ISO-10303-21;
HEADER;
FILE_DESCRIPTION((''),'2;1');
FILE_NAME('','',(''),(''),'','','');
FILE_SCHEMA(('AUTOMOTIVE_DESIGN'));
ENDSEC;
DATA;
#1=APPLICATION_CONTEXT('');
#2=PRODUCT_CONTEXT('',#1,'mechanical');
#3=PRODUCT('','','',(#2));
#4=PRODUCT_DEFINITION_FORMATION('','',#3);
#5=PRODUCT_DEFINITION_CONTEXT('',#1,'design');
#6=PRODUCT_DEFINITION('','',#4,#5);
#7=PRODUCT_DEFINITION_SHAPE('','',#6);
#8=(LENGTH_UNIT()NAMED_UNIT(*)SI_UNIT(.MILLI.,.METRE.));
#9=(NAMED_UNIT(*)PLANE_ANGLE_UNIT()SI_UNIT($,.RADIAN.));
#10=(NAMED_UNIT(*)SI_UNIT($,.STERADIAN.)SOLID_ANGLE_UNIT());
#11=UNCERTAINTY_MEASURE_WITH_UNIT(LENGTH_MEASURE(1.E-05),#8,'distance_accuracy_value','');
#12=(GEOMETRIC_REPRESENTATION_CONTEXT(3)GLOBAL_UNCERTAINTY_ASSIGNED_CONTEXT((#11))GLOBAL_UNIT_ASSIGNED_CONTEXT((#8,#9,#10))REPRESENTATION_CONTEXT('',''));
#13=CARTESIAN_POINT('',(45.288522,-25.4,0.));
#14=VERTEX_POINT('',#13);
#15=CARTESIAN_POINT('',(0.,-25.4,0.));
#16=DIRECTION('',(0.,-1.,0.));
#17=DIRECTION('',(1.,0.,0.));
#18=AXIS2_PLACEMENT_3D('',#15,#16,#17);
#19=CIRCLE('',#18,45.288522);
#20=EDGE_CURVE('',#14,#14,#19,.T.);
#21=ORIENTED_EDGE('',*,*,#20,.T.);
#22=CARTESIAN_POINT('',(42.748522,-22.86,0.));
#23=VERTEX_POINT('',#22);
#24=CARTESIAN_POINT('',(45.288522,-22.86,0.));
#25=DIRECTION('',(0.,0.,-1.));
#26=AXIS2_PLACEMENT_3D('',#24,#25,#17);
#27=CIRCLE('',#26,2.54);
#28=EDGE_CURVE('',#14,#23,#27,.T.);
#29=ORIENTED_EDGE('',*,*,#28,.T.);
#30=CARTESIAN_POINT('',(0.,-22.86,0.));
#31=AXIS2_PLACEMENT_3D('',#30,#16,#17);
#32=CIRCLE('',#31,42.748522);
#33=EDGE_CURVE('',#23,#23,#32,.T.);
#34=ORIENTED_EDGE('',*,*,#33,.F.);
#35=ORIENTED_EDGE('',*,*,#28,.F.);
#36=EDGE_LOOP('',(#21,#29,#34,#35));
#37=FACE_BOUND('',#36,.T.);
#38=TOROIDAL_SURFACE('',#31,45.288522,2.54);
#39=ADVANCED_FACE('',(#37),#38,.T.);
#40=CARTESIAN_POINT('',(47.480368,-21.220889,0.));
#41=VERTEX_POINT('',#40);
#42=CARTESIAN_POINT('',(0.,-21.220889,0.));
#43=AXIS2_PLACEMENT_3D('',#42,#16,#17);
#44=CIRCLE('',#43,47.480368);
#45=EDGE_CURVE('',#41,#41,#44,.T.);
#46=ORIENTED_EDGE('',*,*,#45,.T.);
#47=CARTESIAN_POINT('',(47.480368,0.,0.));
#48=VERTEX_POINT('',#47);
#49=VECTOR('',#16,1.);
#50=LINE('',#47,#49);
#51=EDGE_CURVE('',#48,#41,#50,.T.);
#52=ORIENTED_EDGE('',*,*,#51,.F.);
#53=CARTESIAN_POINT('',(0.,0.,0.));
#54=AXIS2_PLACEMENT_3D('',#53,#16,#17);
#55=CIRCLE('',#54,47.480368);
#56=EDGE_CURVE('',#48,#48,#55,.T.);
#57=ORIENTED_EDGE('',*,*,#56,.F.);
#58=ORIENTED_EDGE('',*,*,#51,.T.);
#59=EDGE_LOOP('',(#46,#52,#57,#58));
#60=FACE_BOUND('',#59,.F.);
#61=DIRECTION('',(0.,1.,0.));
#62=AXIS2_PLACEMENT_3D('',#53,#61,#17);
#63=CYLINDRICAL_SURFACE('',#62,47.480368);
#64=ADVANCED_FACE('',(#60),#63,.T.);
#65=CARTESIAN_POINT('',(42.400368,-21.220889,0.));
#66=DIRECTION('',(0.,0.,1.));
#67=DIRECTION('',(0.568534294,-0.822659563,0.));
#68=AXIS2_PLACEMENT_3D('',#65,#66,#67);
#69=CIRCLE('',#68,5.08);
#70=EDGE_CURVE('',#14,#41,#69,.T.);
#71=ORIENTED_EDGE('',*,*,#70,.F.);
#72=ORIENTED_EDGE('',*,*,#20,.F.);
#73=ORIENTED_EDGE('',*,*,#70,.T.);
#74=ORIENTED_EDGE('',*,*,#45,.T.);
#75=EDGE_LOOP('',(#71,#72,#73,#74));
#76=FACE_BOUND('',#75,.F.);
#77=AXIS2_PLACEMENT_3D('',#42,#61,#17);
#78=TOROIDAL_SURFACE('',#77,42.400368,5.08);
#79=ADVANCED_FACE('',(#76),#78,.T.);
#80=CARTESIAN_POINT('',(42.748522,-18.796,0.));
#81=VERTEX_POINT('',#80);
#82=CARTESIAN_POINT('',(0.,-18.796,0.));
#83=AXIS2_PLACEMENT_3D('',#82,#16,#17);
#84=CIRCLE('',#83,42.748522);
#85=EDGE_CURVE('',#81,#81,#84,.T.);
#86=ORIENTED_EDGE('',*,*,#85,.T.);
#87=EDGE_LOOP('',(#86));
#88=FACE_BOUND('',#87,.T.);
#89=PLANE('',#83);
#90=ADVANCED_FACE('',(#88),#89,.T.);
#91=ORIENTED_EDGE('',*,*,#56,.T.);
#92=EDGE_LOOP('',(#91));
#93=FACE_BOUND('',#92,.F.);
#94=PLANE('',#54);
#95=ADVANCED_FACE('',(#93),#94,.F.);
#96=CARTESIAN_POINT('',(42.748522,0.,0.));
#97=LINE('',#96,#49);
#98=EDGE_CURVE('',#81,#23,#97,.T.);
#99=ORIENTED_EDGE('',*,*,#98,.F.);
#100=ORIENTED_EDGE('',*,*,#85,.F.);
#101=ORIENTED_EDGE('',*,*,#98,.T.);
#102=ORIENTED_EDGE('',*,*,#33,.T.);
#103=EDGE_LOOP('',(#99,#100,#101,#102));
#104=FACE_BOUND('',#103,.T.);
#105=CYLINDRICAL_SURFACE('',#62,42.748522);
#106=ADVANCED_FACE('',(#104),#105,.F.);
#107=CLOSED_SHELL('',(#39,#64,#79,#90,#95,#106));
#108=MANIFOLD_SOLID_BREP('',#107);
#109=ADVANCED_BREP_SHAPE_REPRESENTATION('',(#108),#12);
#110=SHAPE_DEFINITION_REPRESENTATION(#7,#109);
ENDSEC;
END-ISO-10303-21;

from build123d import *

# Parameters (mm, degrees)
F0_R     = 47.4803675011
F0_R_2   = 42.7485217124
F1_DEPTH = 25.4
F2_DEPTH = 18.796
F3_R     = 2.54


# Not quite as in the source:
# - a fillet or chamfer that OpenCascade refuses, or shapes differently, is made with other operations: its cross-section is extruded or revolved along the edge and cut away or added


with BuildPart() as f1:
    # F0 (on Front) → F1 (new body)
    with BuildSketch(Plane.XZ):
        Circle(F0_R)
        Circle(F0_R_2, mode=Mode.SUBTRACT)
    extrude(amount=F1_DEPTH)

    # F0 (on Front) → F2 (join)
    with BuildSketch(Plane.XZ):
        Circle(F0_R_2)
    extrude(amount=F2_DEPTH)

    # F3
    f3_edges = [f1.edges().sort_by_distance(p)[0] for p in [
        (-42.748522, -25.4, 0),
    ]]
    fillet(f3_edges, radius=F3_R)

    # F4: fillet of radius 5.08 on 1 edges, made by hand

    # F4_s1 → F4_t2 (revolve, cut)
    with BuildSketch(Plane.XY):
        with BuildLine():
            ThreePointArc((45.2885217124, -25.4), (46.8991575269, -23.5803996015), (47.4803675011, -21.2208894186))
            Line((47.4803675011, -21.2208894186), (47.4803675011, -25.4))
            Line((47.4803675011, -25.4), (45.2885217124, -25.4))
        make_face()
    revolve(axis=Axis((0, -25.4, 0), (0, -1, 0)), mode=Mode.SUBTRACT)


solid = f1.part
